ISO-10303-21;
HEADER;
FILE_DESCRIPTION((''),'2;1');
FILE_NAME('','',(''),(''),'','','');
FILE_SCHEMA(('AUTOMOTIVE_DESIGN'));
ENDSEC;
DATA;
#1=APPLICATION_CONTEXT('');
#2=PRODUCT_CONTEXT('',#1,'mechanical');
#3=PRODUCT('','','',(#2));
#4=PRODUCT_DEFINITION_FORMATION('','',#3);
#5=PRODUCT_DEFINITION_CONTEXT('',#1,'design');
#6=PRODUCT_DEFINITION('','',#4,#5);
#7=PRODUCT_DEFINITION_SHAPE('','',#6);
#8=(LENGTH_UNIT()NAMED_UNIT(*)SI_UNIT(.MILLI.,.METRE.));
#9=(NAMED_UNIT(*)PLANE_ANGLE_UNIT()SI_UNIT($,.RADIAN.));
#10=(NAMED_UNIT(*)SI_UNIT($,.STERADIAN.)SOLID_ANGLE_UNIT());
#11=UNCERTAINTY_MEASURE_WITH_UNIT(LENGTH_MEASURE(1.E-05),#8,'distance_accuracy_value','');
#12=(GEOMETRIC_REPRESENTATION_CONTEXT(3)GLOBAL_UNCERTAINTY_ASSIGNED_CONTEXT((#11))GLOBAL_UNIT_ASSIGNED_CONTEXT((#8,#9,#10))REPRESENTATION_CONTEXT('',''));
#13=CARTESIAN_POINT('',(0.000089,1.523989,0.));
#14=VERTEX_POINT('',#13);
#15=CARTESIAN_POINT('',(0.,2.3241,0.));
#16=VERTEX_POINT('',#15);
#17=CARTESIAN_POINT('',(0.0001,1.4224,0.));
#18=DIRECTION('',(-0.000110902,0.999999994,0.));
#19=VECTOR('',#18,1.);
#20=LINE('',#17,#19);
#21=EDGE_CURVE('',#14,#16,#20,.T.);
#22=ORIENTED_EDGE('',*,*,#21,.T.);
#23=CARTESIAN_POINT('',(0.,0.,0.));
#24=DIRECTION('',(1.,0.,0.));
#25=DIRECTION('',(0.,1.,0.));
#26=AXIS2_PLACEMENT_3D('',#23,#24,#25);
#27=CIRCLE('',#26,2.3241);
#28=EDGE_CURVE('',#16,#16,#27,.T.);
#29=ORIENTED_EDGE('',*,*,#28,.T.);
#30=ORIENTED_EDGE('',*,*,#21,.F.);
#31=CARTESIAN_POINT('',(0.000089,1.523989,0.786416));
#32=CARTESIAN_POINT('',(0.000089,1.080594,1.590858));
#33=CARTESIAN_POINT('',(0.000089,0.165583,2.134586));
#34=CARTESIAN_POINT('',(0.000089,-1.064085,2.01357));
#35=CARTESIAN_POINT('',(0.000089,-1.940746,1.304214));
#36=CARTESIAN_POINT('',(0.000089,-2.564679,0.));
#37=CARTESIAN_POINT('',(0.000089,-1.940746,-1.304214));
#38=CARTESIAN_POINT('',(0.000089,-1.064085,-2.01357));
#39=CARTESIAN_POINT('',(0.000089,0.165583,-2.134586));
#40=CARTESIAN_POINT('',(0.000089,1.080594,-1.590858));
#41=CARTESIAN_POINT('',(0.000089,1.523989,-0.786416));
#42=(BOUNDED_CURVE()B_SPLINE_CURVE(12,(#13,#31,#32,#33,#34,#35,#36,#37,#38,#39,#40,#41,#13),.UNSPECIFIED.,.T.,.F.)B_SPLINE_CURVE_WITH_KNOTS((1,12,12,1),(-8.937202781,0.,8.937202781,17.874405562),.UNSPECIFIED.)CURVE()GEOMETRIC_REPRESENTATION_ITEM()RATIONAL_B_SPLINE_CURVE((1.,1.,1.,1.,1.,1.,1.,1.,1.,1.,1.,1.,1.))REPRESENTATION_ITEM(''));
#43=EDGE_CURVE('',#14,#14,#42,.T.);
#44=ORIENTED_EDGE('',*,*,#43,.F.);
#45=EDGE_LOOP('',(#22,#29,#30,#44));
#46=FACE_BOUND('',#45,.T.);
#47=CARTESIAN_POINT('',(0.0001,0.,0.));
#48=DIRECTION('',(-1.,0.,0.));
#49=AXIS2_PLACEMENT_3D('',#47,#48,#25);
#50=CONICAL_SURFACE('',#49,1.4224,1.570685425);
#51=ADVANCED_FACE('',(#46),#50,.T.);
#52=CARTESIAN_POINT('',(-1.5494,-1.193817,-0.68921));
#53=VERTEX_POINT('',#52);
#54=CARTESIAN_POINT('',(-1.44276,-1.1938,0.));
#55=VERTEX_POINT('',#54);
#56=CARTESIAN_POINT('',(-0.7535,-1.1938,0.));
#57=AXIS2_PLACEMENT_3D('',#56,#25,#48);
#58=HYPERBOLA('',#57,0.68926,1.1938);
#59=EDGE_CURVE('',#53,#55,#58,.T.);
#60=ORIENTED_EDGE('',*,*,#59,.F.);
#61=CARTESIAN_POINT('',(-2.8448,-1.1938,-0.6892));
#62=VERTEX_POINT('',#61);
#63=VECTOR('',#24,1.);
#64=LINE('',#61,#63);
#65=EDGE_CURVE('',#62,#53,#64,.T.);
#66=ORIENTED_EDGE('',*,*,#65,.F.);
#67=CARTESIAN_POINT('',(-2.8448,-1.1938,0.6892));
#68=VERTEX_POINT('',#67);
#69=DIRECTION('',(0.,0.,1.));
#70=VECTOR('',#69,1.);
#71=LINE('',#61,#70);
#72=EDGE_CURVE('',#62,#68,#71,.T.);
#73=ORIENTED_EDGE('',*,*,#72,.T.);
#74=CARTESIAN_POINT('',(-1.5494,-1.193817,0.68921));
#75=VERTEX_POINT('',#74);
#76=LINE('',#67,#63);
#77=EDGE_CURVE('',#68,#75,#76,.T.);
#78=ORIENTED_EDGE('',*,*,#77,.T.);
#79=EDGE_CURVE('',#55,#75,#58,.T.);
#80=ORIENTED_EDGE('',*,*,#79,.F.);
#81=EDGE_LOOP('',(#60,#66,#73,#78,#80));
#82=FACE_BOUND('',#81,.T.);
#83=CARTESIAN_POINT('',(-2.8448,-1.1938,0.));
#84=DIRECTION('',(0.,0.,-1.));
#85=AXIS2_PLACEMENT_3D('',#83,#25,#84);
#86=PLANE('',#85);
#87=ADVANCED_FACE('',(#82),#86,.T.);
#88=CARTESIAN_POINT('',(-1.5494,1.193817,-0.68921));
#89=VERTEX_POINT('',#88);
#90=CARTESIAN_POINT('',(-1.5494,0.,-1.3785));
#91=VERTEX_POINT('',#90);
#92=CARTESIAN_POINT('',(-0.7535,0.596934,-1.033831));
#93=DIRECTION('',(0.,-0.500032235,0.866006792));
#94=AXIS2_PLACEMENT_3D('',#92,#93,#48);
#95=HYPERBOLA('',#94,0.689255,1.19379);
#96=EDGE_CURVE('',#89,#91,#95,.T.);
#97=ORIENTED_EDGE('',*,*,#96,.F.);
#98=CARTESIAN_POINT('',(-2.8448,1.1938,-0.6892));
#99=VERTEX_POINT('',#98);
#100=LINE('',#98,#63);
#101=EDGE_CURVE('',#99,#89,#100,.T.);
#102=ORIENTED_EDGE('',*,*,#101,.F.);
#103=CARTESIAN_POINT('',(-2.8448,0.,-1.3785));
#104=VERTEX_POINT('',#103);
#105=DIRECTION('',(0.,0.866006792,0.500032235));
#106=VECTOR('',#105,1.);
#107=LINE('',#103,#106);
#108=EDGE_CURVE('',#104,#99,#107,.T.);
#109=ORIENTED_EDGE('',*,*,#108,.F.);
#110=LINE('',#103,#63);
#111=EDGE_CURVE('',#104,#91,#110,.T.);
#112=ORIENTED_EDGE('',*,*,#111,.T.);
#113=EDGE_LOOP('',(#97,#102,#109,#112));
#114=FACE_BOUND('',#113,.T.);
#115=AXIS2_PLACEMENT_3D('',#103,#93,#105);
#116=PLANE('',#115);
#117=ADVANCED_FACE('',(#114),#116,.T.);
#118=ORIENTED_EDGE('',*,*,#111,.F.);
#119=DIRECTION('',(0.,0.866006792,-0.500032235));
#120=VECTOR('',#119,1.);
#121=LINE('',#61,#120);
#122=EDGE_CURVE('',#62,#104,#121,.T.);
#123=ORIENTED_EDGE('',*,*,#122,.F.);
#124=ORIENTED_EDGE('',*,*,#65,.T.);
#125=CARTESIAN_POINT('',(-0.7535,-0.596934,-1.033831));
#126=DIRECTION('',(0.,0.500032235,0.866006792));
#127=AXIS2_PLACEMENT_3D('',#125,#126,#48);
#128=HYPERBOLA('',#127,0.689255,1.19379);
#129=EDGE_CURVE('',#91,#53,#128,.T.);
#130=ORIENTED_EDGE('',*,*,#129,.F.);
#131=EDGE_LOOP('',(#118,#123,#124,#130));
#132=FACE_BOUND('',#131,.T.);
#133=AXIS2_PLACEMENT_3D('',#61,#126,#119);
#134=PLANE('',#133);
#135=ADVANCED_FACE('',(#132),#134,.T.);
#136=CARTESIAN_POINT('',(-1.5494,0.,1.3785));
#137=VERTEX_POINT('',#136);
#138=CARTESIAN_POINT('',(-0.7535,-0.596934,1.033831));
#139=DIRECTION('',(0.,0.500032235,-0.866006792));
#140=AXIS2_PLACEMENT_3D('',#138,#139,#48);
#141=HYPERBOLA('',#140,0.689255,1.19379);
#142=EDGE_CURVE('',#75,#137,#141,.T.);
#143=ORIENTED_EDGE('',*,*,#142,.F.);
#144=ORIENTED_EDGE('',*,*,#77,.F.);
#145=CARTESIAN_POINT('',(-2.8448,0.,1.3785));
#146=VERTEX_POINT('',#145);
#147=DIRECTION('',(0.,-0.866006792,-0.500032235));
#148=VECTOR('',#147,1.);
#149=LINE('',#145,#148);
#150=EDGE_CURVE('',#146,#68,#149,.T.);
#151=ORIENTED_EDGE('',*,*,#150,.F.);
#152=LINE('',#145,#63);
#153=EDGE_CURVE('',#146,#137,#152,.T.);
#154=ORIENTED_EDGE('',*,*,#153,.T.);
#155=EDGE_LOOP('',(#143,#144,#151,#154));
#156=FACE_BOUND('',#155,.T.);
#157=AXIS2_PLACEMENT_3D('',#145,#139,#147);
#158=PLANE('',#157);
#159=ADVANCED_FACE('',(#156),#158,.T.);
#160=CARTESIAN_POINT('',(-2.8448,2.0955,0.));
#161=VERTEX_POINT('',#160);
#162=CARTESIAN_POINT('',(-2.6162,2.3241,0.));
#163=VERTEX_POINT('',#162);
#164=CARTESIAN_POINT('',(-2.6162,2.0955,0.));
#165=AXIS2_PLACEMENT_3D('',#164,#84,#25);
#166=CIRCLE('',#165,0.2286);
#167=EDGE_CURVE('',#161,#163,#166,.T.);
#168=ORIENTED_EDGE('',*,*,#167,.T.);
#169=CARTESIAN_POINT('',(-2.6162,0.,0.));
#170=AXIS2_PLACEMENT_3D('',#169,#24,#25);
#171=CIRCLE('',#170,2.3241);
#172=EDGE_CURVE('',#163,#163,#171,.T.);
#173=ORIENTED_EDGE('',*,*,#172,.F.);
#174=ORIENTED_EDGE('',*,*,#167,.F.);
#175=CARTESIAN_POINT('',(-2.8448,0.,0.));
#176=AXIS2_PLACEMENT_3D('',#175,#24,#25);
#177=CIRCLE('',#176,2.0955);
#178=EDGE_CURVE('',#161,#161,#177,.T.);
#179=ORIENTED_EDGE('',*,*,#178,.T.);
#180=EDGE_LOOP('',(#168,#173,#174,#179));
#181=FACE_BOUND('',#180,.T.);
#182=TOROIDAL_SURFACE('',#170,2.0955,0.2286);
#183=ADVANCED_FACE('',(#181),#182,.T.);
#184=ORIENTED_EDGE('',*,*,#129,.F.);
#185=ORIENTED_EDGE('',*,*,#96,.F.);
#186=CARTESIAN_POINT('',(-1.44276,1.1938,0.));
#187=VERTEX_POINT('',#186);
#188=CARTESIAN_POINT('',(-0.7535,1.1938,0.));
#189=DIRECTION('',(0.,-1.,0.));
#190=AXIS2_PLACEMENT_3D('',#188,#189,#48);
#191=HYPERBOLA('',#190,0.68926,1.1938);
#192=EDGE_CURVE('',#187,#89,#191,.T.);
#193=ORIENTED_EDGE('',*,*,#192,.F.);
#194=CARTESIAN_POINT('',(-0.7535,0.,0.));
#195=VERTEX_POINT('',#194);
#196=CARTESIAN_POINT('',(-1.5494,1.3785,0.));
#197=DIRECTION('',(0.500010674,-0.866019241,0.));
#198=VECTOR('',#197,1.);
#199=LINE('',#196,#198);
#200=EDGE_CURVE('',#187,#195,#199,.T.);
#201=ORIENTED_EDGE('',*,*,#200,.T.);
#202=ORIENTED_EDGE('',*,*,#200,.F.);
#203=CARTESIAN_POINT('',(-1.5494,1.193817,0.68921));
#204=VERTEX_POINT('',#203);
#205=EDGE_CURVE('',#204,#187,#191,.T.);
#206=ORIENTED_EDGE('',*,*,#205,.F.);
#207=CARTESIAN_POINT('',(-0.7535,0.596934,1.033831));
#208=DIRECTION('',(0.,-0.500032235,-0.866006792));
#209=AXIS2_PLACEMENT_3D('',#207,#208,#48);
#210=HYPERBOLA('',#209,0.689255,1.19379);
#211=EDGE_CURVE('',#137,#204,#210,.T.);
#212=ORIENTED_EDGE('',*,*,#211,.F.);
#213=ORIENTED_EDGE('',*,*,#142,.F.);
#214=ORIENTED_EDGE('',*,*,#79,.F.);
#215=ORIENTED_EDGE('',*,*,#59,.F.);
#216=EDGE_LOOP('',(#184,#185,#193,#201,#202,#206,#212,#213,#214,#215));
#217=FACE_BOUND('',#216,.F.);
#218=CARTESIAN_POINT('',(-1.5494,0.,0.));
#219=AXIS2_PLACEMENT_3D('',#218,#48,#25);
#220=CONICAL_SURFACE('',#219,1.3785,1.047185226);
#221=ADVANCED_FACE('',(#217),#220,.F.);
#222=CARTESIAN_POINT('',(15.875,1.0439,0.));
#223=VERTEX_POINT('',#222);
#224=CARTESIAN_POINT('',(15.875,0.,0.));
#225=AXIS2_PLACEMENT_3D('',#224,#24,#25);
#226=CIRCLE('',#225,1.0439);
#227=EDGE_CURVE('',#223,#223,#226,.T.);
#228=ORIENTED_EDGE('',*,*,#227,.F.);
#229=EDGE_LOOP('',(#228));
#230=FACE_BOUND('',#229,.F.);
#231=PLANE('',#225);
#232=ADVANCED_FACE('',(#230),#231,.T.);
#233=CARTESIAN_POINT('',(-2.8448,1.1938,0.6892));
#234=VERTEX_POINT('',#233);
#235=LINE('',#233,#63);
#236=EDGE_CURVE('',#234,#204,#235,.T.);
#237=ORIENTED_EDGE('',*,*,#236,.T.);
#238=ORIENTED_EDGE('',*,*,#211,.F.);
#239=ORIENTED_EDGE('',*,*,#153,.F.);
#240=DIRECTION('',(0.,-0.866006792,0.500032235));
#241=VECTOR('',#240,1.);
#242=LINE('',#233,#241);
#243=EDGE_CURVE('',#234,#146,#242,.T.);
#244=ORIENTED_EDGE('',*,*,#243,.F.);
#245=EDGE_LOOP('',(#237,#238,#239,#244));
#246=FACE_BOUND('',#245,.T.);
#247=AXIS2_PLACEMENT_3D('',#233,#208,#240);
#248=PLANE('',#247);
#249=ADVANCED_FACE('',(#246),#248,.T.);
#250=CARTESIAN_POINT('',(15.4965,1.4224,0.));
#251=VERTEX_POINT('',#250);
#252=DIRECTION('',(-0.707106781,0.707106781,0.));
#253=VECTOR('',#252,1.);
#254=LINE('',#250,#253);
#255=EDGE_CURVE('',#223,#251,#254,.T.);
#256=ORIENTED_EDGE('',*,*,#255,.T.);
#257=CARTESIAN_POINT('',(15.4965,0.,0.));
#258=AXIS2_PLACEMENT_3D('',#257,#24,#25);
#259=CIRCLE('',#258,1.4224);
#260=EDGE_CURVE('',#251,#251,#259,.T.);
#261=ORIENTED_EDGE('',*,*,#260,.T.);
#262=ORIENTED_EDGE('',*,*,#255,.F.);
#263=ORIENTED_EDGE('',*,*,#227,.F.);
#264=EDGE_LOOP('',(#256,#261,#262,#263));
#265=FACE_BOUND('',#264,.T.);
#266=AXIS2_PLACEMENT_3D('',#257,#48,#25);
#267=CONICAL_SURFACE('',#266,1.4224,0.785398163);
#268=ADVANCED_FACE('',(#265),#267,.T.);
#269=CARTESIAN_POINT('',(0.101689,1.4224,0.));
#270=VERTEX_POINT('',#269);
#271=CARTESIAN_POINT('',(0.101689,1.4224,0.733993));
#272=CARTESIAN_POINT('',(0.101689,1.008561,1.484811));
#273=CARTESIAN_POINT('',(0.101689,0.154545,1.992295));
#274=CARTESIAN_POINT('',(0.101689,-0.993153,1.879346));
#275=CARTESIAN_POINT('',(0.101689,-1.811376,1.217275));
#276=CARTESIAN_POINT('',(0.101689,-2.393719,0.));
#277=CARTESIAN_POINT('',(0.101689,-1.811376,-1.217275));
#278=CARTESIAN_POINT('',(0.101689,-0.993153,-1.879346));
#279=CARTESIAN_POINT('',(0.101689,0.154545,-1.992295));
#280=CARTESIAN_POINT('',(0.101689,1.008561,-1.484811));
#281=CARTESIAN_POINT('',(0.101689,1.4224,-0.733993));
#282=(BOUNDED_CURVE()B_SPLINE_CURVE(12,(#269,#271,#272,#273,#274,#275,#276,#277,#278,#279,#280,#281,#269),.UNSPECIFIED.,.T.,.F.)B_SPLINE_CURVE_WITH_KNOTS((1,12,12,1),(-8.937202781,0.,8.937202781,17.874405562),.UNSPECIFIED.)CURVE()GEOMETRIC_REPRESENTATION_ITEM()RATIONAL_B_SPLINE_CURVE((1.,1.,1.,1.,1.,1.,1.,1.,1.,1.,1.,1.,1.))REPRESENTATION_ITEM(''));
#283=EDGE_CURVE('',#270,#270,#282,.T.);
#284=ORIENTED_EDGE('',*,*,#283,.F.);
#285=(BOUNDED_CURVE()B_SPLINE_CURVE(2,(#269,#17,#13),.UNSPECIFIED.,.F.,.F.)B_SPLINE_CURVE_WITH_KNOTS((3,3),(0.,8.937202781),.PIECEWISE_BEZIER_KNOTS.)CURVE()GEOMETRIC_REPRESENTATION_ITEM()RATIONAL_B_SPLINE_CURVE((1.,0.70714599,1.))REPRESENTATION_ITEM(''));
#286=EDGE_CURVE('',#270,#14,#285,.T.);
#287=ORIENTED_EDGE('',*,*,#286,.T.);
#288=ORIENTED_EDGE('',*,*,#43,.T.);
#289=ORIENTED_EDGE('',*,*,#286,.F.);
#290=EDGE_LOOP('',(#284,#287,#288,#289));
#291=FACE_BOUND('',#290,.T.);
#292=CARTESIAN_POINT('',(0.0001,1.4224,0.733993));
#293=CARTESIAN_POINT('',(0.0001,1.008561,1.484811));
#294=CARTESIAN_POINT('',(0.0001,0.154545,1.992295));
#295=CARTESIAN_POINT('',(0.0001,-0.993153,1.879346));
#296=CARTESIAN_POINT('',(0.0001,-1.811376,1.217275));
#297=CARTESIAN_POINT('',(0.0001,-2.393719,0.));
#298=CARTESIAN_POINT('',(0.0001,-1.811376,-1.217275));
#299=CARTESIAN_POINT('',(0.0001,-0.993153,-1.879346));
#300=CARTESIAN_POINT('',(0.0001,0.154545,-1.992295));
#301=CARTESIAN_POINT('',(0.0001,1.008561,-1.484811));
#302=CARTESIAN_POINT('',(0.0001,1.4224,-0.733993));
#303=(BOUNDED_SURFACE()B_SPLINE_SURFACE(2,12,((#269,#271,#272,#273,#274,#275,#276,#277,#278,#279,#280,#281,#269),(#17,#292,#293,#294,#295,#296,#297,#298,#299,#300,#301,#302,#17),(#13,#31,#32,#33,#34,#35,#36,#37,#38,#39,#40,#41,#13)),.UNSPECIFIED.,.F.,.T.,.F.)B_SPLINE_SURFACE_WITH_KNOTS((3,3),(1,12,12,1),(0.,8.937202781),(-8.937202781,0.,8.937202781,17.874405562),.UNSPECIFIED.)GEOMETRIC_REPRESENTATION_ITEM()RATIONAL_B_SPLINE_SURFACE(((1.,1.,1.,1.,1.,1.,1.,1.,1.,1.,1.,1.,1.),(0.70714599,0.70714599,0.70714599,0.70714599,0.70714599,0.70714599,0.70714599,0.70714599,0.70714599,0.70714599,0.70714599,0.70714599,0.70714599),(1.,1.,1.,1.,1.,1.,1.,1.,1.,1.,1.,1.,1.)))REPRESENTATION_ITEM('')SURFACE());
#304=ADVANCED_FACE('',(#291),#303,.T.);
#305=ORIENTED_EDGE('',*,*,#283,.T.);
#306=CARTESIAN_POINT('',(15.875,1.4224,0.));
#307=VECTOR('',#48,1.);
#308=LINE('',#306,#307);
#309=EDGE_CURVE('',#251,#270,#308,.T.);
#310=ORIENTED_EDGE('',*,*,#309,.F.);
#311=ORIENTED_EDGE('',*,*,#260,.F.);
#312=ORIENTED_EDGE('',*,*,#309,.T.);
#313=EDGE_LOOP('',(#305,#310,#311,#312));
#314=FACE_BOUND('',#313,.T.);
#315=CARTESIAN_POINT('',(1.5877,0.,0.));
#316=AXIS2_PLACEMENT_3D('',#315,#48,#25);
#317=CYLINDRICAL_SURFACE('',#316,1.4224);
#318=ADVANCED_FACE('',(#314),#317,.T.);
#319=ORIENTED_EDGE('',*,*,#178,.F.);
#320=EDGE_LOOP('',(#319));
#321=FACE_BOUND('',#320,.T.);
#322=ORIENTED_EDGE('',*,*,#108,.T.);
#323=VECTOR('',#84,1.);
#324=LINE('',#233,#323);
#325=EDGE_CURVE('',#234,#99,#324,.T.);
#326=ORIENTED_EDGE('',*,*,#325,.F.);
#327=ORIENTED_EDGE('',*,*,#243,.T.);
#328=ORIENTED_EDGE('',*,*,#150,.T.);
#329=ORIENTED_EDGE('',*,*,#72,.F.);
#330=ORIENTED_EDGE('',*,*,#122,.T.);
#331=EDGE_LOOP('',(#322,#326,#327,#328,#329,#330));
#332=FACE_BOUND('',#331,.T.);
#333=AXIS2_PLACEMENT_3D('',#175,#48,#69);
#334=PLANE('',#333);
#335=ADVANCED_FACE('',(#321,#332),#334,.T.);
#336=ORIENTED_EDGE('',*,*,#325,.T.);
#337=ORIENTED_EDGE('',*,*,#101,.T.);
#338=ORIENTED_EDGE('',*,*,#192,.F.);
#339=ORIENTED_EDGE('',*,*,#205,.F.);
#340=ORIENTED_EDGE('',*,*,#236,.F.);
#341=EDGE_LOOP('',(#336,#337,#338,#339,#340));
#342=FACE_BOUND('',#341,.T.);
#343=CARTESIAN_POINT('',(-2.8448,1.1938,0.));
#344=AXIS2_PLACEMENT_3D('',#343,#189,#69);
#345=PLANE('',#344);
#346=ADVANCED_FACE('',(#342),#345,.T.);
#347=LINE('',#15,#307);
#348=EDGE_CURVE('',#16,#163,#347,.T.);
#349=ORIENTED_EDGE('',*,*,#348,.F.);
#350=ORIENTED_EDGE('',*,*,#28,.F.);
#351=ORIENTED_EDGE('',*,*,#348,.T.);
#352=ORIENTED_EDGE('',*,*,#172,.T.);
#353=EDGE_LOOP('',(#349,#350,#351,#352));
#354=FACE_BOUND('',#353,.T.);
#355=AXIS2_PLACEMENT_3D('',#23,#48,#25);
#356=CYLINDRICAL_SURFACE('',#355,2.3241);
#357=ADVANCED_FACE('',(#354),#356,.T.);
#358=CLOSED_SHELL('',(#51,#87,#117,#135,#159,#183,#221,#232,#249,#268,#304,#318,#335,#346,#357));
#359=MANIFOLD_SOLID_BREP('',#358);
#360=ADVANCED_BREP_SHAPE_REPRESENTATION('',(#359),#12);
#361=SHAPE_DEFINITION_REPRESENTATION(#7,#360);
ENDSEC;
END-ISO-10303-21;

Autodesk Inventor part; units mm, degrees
ref_plane "YZ Plane" through (0, 0, 0) normal (1, 0, 0) x (0, 1, 0)
ref_plane "XZ Plane" through (0, 0, 0) normal (0, 1, 0) x (-1, 0, 0)
sketch "Sketch1" plane through (0, 0, 0) normal (0, 0, 1) x (1, 0, 0)
  line L0 (-0.7535, 0) -> (15.875, 0)
  line L1 (15.875, 0) -> (15.875, 1.4224)
  line L2 (15.875, 1.4224) -> (1.5877, 1.4224)
  line L3 (1.5877, 1.4224) -> (0.0001, 1.4224)
  line L4 (0.0001, 1.4224) -> (0, 1.4224)
  line L5 (0, 1.4224) -> (0, 2.3241)
  line L6 (0, 2.3241) -> (-2.8448, 2.3241)
  line L7 (-2.8448, 2.3241) -> (-2.8448, 1.3785)
  line L8 (-2.8448, 1.3785) -> (-1.5494, 1.3785)
  line L9 (-1.5494, 1.3785) -> (-0.7535, 0)
  line L10 (-6.5888, 0) -> (19.619, 0) projected
  line L11 (0, -0.4648) -> (0, 2.7889) projected
  line L12 (1.5877, 1.4224) -> (0, 1.4224) construction
  dimension "d1" = 14.2873
  dimension "d2" = 1.5876
  dimension "d3" = 2.8448
  dimension "d4" = 1.2954
  dimension "d5" = 60
  dimension "d6" = 2.8448
  dimension "d7" = 2.8448
  dimension "d8" = 2.757
  dimension "d9" = 4.6482
  dimension "d26" = 15.875
revolve "Body" add sketch "Sketch1" angle 360 about axis through (-0.7535, 0, 0) along (1, 0, 0)
sketch "Sketch2" plane through (-2.8448, 0, 0) normal (-1, 0, 0) x (0, 0, 1)
  circle A0 centre (0, 0) radius 1.3785 projected
  line L0 (0, -3.2537) -> (0, 3.2537) projected
  line L1 (-3.2537, 0) -> (3.2537, 0) projected
  line L2 (1.3785, 0) -> (0.6892, -1.1938)
  line L3 (0.6892, -1.1938) -> (-0.6892, -1.1938)
  line L4 (-0.6892, -1.1938) -> (-1.3785, 0)
  line L5 (-1.3785, 0) -> (-0.6892, 1.1938)
  line L6 (-0.6892, 1.1938) -> (0.6892, 1.1938)
  line L7 (0.6892, 1.1938) -> (1.3785, 0)
  point P0 (0, 0)
extrude "Slot" add sketch "Sketch2" against normal up to next contours L7 A0 | A0 L2 | L6 L0 A0 | A0 L0 L3 | L0 L6 A0 | A0 L3 L0 | L4 A0 | A0 L5
fillet "Fillet1" radius 0.2286 1 edges at (-2.8448, -2.3241, 0)
thread "Thread" size "4-40 UNC" class "2A" standard "ANSI Unified Screw Threads" length 14.2873
chamfer "Chamfer1" distance 0.3785 distance2 0.3785 1 edges at (15.875, -1.4224, 0) measured on face at (15.875, -0.3591, -0.7201)
ref_plane "Work Plane1" through (29, 0, 0) normal (0, -1, 0) x (1, 0, 0)
fillet "Fillet2" radius 0.1016 1 edges at (0.0001, -1.4224, 0)
equation "\"d1\" = GEL"
equation "\"d3\" = KOH"
equation "\"d4\" = INTI"
equation "\"d6\" = GD"
equation "\"d7\" = BDM"
equation "\"d8\" = 1.1547 * SW"
equation "\"d9\" = KOD"
equation "\"d26\" = NLG"
equation "\"d30\" = R"
equation "\"d17\" = RR"
equation "\"d13\" = GEL"
equation "\"d15\" = -0.5 * SPD + 0.5 * GD"
equation "\"d16\" = GUL"
equation "\"GD\" = 2.8448"
equation "\"NLG\" = 15.875"
equation "\"GEL\" = 14.2873"
equation "\"KOD\" = 4.6482"
equation "\"KOH\" = 2.8448"
equation "\"INTI\" = 1.2954"
equation "\"GAL\" = 1.5875"
equation "\"GUL\" = 0.37846"
equation "\"BDM\" = 2.8448"
equation "\"SW\" = 2.3876"
equation "\"RR\" = 0.2286"
equation "\"SPD\" = 2.08788"
equation "\"R\" = 0.1016"
equation "\"PHH\" = 0.127"
equation "\"GD1\" = SPD"
equation "\"THREADDIA\" = 2.8448"
equation "\"FAWI\" = 45deg"
equation "\"KOH1\" = 2.5654"
equation "\"NND\" = 2.8448"
equation "\"TOA\" = 30deg"
equation "\"E0\" = 1.155 * SW"
properties part number "ANSI B18.3 - No. 4 - 40 UNC - 5/8 HS HCS" material "Steel, Mild"
